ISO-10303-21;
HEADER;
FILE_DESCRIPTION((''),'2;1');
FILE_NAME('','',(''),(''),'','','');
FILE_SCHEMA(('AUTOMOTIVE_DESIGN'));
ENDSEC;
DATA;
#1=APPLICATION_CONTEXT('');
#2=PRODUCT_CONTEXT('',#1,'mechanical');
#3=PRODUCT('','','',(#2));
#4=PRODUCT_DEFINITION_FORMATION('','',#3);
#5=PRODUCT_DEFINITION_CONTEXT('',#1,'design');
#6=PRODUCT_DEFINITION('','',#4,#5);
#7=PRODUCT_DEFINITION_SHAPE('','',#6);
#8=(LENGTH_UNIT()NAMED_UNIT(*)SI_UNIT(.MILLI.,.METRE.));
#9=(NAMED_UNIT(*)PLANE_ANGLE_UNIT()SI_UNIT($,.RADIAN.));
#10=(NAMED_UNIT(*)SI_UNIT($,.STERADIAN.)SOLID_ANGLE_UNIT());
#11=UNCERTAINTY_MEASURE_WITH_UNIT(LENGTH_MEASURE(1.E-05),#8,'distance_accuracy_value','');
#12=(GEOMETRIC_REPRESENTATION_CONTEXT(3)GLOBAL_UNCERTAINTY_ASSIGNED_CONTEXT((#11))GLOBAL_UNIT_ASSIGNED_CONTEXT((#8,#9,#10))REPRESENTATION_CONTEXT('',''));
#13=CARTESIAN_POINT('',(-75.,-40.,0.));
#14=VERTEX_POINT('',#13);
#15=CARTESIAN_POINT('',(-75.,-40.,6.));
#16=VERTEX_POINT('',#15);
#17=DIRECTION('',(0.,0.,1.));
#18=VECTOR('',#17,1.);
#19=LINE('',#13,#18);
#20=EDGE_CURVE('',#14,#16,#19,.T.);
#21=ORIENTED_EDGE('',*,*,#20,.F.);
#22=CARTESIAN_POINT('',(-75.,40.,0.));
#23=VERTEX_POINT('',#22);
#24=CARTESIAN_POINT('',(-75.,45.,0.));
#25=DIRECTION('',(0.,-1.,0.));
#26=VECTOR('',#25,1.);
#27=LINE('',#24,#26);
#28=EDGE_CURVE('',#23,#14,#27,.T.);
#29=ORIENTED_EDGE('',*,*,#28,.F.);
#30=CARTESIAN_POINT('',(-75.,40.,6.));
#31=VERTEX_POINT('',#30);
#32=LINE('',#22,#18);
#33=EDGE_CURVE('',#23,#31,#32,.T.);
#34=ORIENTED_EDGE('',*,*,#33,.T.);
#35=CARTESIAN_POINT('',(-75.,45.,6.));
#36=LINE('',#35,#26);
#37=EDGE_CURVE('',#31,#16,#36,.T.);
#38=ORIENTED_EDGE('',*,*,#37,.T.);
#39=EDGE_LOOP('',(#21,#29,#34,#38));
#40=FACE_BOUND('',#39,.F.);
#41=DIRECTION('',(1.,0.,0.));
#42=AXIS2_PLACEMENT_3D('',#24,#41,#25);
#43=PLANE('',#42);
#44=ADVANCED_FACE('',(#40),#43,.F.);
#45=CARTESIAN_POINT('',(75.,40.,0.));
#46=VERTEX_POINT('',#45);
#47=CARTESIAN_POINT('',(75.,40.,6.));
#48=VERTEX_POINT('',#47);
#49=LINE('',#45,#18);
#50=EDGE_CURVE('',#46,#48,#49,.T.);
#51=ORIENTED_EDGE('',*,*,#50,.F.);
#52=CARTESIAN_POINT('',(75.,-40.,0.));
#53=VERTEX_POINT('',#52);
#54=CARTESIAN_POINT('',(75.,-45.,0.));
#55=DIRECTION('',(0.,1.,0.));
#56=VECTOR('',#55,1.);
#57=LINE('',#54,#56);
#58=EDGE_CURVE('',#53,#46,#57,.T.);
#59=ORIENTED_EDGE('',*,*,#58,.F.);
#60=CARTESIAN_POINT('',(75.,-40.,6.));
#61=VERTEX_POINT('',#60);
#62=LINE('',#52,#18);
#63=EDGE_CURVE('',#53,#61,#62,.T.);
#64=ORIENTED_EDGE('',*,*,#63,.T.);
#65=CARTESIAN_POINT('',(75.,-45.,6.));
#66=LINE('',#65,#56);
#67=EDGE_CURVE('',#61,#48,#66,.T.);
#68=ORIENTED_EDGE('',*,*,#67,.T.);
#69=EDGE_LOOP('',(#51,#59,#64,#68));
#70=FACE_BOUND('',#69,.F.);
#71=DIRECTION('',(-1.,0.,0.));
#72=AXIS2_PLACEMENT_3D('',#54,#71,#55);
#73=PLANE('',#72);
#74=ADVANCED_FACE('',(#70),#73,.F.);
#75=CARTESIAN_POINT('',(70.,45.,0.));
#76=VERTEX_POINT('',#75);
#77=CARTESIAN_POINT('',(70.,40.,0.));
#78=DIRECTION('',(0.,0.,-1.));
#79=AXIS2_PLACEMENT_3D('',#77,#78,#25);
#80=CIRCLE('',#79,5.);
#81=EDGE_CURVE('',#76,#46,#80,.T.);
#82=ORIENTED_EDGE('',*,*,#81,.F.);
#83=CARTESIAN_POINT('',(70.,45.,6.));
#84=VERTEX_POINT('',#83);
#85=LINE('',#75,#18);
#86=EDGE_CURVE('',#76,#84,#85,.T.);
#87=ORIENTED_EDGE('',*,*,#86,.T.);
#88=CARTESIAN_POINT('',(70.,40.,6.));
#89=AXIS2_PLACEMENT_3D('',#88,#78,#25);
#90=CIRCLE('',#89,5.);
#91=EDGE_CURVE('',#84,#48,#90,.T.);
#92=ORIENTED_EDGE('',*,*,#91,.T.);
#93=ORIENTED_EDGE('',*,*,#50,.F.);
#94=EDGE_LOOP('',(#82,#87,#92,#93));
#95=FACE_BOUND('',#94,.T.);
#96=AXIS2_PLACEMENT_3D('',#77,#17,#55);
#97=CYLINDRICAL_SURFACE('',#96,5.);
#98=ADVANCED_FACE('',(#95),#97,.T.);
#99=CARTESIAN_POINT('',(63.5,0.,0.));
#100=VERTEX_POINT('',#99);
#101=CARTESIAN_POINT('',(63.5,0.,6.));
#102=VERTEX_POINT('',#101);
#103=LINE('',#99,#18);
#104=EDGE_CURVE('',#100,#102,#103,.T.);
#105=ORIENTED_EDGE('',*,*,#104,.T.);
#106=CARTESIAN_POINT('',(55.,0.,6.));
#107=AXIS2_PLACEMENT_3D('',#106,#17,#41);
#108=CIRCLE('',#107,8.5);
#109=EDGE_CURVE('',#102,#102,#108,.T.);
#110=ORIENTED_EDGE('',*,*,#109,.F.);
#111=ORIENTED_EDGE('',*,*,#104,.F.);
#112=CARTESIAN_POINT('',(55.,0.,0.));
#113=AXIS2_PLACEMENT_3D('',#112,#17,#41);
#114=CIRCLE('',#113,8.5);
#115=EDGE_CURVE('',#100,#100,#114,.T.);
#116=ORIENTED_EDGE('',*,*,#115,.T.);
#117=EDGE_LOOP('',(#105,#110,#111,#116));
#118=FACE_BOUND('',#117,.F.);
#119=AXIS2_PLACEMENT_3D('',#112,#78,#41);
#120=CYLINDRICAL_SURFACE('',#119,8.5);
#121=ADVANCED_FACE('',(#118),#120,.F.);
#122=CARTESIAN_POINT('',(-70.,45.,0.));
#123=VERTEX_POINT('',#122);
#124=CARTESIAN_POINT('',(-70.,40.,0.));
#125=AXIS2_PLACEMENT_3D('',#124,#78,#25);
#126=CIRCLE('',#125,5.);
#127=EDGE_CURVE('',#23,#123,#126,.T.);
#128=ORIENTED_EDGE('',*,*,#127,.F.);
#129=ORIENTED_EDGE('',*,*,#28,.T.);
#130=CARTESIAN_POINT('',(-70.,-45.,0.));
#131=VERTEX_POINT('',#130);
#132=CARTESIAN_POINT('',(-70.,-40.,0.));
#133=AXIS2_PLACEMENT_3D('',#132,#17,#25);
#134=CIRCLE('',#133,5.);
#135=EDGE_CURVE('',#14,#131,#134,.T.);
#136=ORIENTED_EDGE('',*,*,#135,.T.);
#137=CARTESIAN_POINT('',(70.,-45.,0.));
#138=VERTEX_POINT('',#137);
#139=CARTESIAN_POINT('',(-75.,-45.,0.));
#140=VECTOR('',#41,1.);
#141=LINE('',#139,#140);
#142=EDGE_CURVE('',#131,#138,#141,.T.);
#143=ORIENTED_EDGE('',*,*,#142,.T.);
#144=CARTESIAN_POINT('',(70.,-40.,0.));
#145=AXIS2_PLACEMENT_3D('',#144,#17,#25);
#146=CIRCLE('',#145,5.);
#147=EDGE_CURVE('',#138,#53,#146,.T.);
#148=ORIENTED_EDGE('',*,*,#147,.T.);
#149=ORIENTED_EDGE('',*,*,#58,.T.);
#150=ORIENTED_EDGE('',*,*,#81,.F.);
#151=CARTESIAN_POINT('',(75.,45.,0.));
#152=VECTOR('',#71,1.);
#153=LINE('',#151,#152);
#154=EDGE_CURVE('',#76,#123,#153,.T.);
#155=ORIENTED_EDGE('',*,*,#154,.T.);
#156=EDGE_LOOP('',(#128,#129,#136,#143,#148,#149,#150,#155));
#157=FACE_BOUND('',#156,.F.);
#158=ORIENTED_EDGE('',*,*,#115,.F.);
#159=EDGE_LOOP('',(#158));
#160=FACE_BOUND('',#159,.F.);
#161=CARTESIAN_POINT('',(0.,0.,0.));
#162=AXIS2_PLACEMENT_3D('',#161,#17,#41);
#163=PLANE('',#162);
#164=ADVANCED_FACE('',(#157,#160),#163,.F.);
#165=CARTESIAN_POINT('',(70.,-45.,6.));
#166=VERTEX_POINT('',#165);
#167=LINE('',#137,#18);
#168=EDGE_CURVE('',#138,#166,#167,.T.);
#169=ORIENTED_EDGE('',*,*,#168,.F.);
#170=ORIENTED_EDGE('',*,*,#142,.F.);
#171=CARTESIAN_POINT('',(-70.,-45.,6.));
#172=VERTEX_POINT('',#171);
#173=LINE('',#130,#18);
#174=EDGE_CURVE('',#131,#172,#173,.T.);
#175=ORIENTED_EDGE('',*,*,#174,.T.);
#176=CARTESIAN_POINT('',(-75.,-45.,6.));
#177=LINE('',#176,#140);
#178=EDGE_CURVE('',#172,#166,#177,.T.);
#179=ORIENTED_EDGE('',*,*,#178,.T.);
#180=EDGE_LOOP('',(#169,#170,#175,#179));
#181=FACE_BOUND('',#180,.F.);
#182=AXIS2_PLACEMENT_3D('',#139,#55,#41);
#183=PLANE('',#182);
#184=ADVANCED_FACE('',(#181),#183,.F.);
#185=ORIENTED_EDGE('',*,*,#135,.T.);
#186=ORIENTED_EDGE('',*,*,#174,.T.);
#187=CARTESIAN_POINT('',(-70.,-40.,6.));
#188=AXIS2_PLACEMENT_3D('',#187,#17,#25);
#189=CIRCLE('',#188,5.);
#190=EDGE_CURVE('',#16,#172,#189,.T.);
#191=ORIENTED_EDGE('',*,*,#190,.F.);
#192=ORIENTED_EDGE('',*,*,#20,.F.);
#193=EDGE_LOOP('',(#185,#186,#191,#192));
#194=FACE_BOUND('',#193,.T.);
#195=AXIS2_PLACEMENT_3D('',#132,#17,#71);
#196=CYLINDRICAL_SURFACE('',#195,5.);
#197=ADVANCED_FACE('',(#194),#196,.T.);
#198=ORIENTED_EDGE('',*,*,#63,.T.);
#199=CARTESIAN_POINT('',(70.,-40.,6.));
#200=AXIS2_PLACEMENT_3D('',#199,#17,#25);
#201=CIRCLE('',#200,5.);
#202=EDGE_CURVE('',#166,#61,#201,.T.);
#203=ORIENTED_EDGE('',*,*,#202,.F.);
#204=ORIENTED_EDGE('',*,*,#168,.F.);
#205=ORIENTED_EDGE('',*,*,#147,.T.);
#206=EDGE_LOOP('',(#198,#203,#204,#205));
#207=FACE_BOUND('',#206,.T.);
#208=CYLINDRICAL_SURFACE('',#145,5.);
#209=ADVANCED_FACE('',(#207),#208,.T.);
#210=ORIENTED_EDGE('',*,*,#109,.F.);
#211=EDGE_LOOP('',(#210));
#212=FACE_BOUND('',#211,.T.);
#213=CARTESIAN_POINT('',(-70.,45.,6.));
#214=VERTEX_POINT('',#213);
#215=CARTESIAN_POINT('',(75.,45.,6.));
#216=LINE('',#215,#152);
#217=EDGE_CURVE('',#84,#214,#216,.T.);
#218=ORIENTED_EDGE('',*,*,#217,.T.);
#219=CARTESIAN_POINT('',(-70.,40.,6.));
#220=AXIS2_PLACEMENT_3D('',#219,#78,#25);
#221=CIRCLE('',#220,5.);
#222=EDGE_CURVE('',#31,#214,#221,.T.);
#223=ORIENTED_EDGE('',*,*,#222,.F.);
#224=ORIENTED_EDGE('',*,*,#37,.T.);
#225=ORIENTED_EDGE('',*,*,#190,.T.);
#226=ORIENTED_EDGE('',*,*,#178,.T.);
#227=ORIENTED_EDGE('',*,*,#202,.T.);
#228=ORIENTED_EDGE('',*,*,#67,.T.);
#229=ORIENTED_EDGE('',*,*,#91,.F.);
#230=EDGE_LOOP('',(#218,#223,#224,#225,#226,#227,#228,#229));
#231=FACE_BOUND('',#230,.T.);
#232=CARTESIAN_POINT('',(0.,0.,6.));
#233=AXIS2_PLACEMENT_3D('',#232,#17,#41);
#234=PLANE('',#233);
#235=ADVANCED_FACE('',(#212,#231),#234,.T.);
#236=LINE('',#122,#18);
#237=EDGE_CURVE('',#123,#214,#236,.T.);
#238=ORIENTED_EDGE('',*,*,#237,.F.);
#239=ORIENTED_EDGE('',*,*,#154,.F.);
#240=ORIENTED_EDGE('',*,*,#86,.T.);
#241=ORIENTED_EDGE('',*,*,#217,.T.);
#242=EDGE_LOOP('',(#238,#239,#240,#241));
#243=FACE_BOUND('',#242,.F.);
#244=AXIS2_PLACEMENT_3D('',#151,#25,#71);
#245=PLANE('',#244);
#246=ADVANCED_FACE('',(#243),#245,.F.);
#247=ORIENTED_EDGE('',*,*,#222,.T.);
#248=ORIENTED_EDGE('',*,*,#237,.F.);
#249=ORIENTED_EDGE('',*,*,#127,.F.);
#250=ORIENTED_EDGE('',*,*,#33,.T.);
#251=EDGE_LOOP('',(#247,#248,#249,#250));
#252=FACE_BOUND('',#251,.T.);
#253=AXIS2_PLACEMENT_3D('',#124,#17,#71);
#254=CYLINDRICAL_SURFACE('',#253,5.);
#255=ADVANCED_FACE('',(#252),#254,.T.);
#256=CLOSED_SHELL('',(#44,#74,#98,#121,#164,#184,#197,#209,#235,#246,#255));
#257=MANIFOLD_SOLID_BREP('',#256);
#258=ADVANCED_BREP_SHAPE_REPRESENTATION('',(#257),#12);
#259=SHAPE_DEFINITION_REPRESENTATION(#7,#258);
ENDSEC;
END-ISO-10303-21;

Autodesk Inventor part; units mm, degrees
ref_plane "YZ Plane" through (0, 0, 0) normal (1, 0, 0) x (0, 1, 0)
ref_plane "XZ Plane" through (0, 0, 0) normal (0, 1, 0) x (-1, 0, 0)
ref_plane "XY Plane" through (0, 0, 0) normal (0, 0, 1) x (1, 0, 0)
sketch "Sketch1" plane through (0, 0, 0) normal (0, 0, 1) x (1, 0, 0)
  line L0 (-75, -45) -> (75, -45)
  line L1 (75, -45) -> (75, 45)
  line L2 (75, 45) -> (-75, 45)
  line L3 (-75, 45) -> (-75, -45)
  line L4 (-75, -45) -> (75, 45) construction
  line L5 (75, -45) -> (-75, 45) construction
  circle A0 centre (55, -25) radius 8.5
  circle A1 centre (55, 25) radius 8.5
  line L6 (0, 0) -> (75, 0) construction
  circle A2 centre (55, 0) radius 8.5
  dimension "d0" = 150
  dimension "d1" = 90
  dimension "d23" = 17
  dimension "d25" = 20
  dimension "d26" = 20
extrude "Plate1" add sketch "Sketch1" along normal blind 6 contours L3 L2 L1 L0 | A0 | A1
fillet "Corner Round2" radius 5 4 edges at (-75, 45, 3) (-75, -45, 3) (75, -45, 3) (75, 45, 3)
equation "\"d26\" = d25"
equation "\"d2\" = Thickness"
equation "\"BendReliefWidth\" = Thickness"
equation "\"BendReliefDepth\" = 0.5 * Thickness"
equation "\"CornerReliefSize\" = 4 * Thickness"
equation "\"MinimumRemnant\" = 2 * Thickness"
equation "\"TransitionRadius\" = BendRadius"
equation "\"JacobiRadiusSize\" = BendRadius"
equation "\"GapSize\" = Thickness"
equation "\"Thickness\" = 6"
equation "\"BendRadius\" = 5"
properties part number "PRS 940-94 leg floor plate" material "Stainless Steel"
